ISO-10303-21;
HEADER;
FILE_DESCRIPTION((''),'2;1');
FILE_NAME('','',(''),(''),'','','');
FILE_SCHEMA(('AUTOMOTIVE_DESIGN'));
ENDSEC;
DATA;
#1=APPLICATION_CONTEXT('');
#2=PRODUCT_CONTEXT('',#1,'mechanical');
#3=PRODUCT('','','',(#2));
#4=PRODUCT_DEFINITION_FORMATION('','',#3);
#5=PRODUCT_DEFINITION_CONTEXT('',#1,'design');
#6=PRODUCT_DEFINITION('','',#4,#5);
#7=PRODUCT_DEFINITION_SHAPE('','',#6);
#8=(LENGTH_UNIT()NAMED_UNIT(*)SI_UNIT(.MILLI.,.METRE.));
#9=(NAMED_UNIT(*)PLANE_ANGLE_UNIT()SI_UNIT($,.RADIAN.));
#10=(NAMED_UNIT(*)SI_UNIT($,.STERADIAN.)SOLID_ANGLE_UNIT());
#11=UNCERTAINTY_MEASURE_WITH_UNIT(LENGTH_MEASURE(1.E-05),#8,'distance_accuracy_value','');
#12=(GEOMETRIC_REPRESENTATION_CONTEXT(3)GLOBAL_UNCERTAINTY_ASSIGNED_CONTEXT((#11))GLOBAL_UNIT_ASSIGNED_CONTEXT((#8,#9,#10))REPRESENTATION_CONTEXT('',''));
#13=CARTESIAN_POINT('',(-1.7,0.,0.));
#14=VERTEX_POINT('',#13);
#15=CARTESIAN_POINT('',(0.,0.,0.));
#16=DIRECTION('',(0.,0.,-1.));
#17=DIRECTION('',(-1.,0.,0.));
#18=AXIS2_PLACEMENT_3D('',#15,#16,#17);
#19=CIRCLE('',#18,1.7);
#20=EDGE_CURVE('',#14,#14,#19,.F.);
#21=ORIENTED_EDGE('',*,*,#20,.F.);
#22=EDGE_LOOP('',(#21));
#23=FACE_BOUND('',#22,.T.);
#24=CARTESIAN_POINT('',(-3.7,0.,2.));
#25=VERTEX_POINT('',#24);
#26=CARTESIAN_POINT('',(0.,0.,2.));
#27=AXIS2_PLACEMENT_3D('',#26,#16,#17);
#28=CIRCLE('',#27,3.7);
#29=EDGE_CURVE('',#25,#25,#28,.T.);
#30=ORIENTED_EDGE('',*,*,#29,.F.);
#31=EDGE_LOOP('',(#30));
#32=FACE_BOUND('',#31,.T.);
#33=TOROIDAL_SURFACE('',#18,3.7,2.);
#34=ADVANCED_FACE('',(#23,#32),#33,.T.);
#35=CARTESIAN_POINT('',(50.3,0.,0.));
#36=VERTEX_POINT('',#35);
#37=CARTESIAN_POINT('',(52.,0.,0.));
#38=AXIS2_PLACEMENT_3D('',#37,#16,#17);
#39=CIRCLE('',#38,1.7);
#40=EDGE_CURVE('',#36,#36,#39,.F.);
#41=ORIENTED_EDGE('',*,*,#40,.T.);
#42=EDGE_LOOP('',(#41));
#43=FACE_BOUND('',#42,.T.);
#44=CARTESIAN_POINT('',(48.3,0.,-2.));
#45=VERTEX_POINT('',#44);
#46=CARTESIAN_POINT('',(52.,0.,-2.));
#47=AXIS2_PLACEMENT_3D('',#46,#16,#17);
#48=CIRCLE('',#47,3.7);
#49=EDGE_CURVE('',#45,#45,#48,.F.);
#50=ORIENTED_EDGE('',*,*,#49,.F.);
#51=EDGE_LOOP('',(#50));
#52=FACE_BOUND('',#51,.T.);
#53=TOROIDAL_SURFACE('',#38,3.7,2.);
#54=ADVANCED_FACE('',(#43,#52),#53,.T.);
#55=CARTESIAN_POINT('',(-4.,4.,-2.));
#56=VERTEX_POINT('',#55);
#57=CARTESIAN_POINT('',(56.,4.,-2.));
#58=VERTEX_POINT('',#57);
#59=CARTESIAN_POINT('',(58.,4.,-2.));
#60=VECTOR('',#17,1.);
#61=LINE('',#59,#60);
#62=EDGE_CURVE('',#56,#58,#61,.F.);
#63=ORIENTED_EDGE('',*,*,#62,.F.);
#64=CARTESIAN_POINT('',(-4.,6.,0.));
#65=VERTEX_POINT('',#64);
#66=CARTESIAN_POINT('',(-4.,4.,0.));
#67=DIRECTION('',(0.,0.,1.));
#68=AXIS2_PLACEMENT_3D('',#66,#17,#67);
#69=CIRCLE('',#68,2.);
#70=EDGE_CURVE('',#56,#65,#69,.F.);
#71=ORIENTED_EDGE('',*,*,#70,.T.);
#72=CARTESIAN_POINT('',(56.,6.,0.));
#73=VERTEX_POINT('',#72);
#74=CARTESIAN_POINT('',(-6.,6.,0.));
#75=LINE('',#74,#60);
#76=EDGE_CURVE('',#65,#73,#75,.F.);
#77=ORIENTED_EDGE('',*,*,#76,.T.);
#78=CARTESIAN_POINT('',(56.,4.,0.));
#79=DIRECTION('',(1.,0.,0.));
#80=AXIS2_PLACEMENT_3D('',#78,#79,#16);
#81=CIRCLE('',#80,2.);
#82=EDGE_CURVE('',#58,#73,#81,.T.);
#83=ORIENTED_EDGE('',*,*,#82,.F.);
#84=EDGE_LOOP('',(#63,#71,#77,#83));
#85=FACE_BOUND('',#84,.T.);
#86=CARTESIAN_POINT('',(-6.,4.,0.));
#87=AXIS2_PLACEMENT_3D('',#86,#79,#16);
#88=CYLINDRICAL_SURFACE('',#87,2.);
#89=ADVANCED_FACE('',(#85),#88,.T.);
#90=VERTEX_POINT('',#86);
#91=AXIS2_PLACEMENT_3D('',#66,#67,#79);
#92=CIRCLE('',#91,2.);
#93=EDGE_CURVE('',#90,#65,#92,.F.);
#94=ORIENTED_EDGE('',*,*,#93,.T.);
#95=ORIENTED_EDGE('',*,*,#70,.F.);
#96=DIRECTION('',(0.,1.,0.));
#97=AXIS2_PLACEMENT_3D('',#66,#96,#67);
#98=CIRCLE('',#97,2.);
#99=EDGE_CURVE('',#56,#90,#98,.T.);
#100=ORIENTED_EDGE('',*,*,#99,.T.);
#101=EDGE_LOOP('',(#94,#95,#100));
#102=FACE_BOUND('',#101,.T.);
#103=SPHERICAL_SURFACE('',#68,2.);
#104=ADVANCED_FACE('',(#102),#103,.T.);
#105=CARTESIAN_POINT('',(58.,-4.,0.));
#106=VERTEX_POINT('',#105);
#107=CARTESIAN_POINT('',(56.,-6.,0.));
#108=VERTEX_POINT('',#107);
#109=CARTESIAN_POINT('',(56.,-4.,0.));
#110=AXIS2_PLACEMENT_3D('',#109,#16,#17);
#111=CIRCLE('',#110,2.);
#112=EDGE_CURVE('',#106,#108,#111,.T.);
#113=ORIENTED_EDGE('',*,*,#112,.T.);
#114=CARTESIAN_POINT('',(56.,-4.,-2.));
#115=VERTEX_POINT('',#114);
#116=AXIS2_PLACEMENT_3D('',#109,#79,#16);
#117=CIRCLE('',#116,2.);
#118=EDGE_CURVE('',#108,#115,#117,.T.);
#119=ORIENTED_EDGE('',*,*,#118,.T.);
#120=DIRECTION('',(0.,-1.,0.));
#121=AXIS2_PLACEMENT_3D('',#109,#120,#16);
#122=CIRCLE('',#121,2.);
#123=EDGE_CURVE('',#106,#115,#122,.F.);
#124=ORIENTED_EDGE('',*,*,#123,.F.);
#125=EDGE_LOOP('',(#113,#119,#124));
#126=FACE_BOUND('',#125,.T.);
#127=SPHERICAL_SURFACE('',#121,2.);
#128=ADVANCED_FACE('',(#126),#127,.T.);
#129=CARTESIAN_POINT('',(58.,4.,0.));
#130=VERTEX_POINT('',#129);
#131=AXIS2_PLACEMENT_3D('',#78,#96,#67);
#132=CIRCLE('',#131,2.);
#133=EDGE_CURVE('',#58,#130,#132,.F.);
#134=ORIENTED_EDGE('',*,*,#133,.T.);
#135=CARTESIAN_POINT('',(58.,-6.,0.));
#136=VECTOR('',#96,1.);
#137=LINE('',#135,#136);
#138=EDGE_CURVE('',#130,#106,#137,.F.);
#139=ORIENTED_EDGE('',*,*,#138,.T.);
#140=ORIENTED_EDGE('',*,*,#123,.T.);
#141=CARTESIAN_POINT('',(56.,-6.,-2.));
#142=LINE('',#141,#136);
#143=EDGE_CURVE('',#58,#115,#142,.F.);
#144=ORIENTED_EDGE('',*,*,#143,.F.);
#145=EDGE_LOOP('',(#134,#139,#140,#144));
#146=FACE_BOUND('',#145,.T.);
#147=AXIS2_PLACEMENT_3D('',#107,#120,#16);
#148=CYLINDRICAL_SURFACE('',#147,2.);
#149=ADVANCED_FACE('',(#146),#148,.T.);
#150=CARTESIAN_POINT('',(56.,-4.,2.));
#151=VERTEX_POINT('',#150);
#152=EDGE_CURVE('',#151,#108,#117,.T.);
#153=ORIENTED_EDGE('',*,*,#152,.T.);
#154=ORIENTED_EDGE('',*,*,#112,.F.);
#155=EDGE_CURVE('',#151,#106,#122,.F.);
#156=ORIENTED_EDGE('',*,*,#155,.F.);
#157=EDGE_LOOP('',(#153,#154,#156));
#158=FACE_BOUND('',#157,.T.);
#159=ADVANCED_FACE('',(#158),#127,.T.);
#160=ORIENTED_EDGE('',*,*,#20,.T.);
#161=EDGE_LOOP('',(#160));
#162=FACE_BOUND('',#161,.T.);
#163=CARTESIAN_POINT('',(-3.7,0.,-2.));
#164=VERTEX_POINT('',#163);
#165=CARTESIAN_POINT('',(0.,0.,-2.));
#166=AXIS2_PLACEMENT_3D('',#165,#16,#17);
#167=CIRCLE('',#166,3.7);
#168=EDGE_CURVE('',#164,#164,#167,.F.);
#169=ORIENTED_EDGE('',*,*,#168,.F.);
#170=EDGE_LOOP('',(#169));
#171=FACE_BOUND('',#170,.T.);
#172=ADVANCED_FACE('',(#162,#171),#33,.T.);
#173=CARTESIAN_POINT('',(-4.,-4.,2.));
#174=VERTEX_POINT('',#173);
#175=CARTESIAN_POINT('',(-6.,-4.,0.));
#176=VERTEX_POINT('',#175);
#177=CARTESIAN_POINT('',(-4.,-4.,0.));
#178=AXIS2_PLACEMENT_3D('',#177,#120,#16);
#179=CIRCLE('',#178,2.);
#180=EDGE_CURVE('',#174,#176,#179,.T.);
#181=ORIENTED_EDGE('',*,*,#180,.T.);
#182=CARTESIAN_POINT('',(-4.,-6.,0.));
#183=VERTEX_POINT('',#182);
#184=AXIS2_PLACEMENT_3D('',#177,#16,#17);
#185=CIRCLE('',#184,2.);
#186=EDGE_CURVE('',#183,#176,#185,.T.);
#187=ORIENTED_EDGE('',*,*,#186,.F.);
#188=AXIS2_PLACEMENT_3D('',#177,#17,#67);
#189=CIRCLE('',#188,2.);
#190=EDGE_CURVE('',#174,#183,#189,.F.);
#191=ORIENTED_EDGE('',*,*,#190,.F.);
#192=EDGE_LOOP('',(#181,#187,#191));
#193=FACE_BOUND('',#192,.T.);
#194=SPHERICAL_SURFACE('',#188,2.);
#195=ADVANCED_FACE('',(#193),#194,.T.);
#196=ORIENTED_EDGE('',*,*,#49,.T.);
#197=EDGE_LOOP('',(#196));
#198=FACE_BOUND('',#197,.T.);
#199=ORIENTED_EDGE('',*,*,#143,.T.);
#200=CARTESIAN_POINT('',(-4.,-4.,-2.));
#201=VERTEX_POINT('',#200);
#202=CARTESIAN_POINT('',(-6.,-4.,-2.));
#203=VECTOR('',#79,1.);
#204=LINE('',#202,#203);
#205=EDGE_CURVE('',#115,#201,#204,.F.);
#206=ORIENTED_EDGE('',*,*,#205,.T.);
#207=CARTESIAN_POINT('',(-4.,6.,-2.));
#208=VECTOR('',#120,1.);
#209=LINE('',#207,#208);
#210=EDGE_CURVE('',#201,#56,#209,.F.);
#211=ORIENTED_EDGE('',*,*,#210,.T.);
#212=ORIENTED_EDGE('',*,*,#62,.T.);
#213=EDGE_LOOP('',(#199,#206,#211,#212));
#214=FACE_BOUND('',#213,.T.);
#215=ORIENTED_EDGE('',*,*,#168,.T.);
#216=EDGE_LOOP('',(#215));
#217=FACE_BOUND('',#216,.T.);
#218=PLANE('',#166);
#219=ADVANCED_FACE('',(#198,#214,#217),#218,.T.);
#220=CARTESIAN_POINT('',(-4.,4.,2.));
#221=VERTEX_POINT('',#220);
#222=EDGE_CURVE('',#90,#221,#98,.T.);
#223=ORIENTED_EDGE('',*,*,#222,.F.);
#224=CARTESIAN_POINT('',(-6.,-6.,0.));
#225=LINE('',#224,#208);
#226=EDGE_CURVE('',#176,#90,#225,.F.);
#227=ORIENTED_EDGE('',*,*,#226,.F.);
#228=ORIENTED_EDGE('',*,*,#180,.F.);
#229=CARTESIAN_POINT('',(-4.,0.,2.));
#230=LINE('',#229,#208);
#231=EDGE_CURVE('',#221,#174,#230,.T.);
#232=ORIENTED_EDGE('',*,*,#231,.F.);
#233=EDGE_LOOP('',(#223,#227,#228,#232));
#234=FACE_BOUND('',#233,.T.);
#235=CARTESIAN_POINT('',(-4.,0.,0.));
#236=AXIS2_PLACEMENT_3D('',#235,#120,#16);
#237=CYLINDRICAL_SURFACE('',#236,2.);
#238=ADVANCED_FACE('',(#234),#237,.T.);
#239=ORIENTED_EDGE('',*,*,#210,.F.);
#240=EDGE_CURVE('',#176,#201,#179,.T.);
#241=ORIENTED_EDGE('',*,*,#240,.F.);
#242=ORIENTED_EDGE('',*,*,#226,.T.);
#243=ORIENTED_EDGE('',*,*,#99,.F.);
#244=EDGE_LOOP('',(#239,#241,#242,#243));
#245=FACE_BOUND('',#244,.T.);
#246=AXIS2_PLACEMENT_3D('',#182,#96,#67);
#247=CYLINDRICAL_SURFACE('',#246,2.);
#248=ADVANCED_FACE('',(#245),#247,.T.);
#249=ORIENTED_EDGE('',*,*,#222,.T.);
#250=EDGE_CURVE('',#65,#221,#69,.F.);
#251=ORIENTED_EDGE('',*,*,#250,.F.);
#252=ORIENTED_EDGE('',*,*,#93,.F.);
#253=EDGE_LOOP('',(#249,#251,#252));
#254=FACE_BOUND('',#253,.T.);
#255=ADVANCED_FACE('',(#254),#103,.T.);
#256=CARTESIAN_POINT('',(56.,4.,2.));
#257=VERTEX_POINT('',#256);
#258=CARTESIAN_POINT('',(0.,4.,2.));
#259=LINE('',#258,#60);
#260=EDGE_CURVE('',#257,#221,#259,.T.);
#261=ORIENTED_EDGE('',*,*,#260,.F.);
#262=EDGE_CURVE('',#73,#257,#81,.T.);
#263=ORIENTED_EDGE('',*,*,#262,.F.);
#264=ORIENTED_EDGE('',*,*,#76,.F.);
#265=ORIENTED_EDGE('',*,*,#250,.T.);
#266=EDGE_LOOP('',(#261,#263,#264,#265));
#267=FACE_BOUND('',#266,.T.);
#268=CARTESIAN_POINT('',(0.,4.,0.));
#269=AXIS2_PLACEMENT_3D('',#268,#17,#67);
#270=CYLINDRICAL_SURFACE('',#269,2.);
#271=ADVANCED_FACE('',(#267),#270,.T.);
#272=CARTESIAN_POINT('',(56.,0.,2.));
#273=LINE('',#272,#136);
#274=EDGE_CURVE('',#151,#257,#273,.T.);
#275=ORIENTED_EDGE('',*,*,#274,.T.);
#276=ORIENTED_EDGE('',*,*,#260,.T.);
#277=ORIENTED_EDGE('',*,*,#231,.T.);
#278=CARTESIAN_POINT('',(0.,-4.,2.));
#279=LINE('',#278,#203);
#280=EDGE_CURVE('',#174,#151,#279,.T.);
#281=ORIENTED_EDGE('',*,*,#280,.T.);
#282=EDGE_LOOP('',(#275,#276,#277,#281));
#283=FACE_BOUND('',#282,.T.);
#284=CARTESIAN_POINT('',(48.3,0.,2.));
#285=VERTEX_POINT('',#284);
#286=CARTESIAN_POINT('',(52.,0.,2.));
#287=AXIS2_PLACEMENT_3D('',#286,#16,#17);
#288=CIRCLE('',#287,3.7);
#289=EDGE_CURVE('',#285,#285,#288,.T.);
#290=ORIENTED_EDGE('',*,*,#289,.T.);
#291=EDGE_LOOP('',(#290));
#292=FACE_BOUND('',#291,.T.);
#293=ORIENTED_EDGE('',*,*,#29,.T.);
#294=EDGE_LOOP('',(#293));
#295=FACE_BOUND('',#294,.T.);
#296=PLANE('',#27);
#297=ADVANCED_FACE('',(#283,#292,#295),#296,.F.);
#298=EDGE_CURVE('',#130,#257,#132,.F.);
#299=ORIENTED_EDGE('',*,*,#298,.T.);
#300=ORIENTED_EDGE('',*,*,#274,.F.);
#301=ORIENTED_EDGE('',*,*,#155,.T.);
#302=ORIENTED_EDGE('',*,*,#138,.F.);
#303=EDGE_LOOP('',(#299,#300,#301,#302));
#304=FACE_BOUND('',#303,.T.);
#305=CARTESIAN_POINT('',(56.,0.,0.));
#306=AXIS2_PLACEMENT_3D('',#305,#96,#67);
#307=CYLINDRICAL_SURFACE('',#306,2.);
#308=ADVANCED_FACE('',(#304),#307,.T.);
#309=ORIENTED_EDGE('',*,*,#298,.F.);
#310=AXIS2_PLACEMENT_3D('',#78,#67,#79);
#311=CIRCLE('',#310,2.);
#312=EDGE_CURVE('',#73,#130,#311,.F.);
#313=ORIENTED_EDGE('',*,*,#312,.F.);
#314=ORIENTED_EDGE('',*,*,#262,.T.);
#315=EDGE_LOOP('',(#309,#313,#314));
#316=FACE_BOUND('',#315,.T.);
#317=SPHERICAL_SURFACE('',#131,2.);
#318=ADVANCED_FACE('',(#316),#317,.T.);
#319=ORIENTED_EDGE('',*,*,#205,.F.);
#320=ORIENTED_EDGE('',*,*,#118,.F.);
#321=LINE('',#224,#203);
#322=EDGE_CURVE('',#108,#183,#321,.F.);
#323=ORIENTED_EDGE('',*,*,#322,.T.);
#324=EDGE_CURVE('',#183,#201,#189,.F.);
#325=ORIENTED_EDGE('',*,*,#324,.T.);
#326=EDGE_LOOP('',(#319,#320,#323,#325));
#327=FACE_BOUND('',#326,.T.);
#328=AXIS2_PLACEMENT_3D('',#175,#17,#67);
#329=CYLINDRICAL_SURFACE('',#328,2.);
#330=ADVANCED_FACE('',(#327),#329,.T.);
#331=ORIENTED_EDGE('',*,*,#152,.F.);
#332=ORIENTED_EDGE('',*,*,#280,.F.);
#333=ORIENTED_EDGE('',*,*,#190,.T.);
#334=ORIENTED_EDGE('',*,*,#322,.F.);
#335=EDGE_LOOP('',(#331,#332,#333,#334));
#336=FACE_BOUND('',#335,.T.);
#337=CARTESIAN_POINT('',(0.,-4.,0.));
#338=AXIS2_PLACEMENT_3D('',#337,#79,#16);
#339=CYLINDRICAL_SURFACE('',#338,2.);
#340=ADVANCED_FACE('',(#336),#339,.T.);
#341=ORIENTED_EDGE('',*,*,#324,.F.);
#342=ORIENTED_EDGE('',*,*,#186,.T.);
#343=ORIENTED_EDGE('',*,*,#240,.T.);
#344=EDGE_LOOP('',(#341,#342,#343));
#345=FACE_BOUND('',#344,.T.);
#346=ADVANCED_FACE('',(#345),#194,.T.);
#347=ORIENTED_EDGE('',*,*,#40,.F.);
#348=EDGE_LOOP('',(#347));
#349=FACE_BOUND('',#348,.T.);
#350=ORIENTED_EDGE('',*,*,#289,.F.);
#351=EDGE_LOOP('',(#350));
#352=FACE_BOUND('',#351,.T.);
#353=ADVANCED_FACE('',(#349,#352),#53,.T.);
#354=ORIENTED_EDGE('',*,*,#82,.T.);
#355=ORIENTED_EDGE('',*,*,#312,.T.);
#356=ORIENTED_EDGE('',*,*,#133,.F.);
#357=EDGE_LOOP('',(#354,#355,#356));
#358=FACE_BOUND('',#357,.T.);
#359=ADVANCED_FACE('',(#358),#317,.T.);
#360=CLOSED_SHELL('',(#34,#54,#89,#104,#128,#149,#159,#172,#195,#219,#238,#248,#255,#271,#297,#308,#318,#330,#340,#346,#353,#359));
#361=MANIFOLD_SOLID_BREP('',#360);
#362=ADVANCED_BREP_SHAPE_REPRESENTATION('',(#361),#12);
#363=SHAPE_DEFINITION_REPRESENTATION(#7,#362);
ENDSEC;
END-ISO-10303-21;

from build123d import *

# Parameters (mm, degrees)
SKETCH_1_W      = 64
SKETCH_1_H      = 12
SKETCH_1_R      = 1.7
EXTRUDE_1_DEPTH = 2
FILLET_1_R      = 2


with BuildPart() as part:
    # 草图1 → 凸台-拉伸1 (new, symmetric)
    with BuildSketch(Plane.XY):
        with Locations((26, 0)):
            Rectangle(SKETCH_1_W, SKETCH_1_H)
        Circle(SKETCH_1_R, mode=Mode.SUBTRACT)
        with Locations((52, 0)):
            Circle(SKETCH_1_R, mode=Mode.SUBTRACT)
    extrude(amount=EXTRUDE_1_DEPTH, both=True)

    # 圆角1
    fillet_1_edges = [part.edges().sort_by_distance(p)[0] for p in [
        (-1.7, 0, -2),
        (-1.7, 0, 2),
        (-6, 0, 2),
        (50.3, 0, -2),
        (50.3, 0, 2),
        (26, -6, 2),
        (58, 0, 2),
        (26, -6, -2),
        (-6, 0, -2),
        (26, 6, -2),
        (58, 0, -2),
        (58, -6, 0),
        (-6, -6, 0),
        (-6, 6, 0),
        (58, 6, 0),
        (26, 6, 2),
    ]]
    fillet(fillet_1_edges, radius=FILLET_1_R - 0.0001)  # a hair under: the kernel refuses the full size


solid = part.part
